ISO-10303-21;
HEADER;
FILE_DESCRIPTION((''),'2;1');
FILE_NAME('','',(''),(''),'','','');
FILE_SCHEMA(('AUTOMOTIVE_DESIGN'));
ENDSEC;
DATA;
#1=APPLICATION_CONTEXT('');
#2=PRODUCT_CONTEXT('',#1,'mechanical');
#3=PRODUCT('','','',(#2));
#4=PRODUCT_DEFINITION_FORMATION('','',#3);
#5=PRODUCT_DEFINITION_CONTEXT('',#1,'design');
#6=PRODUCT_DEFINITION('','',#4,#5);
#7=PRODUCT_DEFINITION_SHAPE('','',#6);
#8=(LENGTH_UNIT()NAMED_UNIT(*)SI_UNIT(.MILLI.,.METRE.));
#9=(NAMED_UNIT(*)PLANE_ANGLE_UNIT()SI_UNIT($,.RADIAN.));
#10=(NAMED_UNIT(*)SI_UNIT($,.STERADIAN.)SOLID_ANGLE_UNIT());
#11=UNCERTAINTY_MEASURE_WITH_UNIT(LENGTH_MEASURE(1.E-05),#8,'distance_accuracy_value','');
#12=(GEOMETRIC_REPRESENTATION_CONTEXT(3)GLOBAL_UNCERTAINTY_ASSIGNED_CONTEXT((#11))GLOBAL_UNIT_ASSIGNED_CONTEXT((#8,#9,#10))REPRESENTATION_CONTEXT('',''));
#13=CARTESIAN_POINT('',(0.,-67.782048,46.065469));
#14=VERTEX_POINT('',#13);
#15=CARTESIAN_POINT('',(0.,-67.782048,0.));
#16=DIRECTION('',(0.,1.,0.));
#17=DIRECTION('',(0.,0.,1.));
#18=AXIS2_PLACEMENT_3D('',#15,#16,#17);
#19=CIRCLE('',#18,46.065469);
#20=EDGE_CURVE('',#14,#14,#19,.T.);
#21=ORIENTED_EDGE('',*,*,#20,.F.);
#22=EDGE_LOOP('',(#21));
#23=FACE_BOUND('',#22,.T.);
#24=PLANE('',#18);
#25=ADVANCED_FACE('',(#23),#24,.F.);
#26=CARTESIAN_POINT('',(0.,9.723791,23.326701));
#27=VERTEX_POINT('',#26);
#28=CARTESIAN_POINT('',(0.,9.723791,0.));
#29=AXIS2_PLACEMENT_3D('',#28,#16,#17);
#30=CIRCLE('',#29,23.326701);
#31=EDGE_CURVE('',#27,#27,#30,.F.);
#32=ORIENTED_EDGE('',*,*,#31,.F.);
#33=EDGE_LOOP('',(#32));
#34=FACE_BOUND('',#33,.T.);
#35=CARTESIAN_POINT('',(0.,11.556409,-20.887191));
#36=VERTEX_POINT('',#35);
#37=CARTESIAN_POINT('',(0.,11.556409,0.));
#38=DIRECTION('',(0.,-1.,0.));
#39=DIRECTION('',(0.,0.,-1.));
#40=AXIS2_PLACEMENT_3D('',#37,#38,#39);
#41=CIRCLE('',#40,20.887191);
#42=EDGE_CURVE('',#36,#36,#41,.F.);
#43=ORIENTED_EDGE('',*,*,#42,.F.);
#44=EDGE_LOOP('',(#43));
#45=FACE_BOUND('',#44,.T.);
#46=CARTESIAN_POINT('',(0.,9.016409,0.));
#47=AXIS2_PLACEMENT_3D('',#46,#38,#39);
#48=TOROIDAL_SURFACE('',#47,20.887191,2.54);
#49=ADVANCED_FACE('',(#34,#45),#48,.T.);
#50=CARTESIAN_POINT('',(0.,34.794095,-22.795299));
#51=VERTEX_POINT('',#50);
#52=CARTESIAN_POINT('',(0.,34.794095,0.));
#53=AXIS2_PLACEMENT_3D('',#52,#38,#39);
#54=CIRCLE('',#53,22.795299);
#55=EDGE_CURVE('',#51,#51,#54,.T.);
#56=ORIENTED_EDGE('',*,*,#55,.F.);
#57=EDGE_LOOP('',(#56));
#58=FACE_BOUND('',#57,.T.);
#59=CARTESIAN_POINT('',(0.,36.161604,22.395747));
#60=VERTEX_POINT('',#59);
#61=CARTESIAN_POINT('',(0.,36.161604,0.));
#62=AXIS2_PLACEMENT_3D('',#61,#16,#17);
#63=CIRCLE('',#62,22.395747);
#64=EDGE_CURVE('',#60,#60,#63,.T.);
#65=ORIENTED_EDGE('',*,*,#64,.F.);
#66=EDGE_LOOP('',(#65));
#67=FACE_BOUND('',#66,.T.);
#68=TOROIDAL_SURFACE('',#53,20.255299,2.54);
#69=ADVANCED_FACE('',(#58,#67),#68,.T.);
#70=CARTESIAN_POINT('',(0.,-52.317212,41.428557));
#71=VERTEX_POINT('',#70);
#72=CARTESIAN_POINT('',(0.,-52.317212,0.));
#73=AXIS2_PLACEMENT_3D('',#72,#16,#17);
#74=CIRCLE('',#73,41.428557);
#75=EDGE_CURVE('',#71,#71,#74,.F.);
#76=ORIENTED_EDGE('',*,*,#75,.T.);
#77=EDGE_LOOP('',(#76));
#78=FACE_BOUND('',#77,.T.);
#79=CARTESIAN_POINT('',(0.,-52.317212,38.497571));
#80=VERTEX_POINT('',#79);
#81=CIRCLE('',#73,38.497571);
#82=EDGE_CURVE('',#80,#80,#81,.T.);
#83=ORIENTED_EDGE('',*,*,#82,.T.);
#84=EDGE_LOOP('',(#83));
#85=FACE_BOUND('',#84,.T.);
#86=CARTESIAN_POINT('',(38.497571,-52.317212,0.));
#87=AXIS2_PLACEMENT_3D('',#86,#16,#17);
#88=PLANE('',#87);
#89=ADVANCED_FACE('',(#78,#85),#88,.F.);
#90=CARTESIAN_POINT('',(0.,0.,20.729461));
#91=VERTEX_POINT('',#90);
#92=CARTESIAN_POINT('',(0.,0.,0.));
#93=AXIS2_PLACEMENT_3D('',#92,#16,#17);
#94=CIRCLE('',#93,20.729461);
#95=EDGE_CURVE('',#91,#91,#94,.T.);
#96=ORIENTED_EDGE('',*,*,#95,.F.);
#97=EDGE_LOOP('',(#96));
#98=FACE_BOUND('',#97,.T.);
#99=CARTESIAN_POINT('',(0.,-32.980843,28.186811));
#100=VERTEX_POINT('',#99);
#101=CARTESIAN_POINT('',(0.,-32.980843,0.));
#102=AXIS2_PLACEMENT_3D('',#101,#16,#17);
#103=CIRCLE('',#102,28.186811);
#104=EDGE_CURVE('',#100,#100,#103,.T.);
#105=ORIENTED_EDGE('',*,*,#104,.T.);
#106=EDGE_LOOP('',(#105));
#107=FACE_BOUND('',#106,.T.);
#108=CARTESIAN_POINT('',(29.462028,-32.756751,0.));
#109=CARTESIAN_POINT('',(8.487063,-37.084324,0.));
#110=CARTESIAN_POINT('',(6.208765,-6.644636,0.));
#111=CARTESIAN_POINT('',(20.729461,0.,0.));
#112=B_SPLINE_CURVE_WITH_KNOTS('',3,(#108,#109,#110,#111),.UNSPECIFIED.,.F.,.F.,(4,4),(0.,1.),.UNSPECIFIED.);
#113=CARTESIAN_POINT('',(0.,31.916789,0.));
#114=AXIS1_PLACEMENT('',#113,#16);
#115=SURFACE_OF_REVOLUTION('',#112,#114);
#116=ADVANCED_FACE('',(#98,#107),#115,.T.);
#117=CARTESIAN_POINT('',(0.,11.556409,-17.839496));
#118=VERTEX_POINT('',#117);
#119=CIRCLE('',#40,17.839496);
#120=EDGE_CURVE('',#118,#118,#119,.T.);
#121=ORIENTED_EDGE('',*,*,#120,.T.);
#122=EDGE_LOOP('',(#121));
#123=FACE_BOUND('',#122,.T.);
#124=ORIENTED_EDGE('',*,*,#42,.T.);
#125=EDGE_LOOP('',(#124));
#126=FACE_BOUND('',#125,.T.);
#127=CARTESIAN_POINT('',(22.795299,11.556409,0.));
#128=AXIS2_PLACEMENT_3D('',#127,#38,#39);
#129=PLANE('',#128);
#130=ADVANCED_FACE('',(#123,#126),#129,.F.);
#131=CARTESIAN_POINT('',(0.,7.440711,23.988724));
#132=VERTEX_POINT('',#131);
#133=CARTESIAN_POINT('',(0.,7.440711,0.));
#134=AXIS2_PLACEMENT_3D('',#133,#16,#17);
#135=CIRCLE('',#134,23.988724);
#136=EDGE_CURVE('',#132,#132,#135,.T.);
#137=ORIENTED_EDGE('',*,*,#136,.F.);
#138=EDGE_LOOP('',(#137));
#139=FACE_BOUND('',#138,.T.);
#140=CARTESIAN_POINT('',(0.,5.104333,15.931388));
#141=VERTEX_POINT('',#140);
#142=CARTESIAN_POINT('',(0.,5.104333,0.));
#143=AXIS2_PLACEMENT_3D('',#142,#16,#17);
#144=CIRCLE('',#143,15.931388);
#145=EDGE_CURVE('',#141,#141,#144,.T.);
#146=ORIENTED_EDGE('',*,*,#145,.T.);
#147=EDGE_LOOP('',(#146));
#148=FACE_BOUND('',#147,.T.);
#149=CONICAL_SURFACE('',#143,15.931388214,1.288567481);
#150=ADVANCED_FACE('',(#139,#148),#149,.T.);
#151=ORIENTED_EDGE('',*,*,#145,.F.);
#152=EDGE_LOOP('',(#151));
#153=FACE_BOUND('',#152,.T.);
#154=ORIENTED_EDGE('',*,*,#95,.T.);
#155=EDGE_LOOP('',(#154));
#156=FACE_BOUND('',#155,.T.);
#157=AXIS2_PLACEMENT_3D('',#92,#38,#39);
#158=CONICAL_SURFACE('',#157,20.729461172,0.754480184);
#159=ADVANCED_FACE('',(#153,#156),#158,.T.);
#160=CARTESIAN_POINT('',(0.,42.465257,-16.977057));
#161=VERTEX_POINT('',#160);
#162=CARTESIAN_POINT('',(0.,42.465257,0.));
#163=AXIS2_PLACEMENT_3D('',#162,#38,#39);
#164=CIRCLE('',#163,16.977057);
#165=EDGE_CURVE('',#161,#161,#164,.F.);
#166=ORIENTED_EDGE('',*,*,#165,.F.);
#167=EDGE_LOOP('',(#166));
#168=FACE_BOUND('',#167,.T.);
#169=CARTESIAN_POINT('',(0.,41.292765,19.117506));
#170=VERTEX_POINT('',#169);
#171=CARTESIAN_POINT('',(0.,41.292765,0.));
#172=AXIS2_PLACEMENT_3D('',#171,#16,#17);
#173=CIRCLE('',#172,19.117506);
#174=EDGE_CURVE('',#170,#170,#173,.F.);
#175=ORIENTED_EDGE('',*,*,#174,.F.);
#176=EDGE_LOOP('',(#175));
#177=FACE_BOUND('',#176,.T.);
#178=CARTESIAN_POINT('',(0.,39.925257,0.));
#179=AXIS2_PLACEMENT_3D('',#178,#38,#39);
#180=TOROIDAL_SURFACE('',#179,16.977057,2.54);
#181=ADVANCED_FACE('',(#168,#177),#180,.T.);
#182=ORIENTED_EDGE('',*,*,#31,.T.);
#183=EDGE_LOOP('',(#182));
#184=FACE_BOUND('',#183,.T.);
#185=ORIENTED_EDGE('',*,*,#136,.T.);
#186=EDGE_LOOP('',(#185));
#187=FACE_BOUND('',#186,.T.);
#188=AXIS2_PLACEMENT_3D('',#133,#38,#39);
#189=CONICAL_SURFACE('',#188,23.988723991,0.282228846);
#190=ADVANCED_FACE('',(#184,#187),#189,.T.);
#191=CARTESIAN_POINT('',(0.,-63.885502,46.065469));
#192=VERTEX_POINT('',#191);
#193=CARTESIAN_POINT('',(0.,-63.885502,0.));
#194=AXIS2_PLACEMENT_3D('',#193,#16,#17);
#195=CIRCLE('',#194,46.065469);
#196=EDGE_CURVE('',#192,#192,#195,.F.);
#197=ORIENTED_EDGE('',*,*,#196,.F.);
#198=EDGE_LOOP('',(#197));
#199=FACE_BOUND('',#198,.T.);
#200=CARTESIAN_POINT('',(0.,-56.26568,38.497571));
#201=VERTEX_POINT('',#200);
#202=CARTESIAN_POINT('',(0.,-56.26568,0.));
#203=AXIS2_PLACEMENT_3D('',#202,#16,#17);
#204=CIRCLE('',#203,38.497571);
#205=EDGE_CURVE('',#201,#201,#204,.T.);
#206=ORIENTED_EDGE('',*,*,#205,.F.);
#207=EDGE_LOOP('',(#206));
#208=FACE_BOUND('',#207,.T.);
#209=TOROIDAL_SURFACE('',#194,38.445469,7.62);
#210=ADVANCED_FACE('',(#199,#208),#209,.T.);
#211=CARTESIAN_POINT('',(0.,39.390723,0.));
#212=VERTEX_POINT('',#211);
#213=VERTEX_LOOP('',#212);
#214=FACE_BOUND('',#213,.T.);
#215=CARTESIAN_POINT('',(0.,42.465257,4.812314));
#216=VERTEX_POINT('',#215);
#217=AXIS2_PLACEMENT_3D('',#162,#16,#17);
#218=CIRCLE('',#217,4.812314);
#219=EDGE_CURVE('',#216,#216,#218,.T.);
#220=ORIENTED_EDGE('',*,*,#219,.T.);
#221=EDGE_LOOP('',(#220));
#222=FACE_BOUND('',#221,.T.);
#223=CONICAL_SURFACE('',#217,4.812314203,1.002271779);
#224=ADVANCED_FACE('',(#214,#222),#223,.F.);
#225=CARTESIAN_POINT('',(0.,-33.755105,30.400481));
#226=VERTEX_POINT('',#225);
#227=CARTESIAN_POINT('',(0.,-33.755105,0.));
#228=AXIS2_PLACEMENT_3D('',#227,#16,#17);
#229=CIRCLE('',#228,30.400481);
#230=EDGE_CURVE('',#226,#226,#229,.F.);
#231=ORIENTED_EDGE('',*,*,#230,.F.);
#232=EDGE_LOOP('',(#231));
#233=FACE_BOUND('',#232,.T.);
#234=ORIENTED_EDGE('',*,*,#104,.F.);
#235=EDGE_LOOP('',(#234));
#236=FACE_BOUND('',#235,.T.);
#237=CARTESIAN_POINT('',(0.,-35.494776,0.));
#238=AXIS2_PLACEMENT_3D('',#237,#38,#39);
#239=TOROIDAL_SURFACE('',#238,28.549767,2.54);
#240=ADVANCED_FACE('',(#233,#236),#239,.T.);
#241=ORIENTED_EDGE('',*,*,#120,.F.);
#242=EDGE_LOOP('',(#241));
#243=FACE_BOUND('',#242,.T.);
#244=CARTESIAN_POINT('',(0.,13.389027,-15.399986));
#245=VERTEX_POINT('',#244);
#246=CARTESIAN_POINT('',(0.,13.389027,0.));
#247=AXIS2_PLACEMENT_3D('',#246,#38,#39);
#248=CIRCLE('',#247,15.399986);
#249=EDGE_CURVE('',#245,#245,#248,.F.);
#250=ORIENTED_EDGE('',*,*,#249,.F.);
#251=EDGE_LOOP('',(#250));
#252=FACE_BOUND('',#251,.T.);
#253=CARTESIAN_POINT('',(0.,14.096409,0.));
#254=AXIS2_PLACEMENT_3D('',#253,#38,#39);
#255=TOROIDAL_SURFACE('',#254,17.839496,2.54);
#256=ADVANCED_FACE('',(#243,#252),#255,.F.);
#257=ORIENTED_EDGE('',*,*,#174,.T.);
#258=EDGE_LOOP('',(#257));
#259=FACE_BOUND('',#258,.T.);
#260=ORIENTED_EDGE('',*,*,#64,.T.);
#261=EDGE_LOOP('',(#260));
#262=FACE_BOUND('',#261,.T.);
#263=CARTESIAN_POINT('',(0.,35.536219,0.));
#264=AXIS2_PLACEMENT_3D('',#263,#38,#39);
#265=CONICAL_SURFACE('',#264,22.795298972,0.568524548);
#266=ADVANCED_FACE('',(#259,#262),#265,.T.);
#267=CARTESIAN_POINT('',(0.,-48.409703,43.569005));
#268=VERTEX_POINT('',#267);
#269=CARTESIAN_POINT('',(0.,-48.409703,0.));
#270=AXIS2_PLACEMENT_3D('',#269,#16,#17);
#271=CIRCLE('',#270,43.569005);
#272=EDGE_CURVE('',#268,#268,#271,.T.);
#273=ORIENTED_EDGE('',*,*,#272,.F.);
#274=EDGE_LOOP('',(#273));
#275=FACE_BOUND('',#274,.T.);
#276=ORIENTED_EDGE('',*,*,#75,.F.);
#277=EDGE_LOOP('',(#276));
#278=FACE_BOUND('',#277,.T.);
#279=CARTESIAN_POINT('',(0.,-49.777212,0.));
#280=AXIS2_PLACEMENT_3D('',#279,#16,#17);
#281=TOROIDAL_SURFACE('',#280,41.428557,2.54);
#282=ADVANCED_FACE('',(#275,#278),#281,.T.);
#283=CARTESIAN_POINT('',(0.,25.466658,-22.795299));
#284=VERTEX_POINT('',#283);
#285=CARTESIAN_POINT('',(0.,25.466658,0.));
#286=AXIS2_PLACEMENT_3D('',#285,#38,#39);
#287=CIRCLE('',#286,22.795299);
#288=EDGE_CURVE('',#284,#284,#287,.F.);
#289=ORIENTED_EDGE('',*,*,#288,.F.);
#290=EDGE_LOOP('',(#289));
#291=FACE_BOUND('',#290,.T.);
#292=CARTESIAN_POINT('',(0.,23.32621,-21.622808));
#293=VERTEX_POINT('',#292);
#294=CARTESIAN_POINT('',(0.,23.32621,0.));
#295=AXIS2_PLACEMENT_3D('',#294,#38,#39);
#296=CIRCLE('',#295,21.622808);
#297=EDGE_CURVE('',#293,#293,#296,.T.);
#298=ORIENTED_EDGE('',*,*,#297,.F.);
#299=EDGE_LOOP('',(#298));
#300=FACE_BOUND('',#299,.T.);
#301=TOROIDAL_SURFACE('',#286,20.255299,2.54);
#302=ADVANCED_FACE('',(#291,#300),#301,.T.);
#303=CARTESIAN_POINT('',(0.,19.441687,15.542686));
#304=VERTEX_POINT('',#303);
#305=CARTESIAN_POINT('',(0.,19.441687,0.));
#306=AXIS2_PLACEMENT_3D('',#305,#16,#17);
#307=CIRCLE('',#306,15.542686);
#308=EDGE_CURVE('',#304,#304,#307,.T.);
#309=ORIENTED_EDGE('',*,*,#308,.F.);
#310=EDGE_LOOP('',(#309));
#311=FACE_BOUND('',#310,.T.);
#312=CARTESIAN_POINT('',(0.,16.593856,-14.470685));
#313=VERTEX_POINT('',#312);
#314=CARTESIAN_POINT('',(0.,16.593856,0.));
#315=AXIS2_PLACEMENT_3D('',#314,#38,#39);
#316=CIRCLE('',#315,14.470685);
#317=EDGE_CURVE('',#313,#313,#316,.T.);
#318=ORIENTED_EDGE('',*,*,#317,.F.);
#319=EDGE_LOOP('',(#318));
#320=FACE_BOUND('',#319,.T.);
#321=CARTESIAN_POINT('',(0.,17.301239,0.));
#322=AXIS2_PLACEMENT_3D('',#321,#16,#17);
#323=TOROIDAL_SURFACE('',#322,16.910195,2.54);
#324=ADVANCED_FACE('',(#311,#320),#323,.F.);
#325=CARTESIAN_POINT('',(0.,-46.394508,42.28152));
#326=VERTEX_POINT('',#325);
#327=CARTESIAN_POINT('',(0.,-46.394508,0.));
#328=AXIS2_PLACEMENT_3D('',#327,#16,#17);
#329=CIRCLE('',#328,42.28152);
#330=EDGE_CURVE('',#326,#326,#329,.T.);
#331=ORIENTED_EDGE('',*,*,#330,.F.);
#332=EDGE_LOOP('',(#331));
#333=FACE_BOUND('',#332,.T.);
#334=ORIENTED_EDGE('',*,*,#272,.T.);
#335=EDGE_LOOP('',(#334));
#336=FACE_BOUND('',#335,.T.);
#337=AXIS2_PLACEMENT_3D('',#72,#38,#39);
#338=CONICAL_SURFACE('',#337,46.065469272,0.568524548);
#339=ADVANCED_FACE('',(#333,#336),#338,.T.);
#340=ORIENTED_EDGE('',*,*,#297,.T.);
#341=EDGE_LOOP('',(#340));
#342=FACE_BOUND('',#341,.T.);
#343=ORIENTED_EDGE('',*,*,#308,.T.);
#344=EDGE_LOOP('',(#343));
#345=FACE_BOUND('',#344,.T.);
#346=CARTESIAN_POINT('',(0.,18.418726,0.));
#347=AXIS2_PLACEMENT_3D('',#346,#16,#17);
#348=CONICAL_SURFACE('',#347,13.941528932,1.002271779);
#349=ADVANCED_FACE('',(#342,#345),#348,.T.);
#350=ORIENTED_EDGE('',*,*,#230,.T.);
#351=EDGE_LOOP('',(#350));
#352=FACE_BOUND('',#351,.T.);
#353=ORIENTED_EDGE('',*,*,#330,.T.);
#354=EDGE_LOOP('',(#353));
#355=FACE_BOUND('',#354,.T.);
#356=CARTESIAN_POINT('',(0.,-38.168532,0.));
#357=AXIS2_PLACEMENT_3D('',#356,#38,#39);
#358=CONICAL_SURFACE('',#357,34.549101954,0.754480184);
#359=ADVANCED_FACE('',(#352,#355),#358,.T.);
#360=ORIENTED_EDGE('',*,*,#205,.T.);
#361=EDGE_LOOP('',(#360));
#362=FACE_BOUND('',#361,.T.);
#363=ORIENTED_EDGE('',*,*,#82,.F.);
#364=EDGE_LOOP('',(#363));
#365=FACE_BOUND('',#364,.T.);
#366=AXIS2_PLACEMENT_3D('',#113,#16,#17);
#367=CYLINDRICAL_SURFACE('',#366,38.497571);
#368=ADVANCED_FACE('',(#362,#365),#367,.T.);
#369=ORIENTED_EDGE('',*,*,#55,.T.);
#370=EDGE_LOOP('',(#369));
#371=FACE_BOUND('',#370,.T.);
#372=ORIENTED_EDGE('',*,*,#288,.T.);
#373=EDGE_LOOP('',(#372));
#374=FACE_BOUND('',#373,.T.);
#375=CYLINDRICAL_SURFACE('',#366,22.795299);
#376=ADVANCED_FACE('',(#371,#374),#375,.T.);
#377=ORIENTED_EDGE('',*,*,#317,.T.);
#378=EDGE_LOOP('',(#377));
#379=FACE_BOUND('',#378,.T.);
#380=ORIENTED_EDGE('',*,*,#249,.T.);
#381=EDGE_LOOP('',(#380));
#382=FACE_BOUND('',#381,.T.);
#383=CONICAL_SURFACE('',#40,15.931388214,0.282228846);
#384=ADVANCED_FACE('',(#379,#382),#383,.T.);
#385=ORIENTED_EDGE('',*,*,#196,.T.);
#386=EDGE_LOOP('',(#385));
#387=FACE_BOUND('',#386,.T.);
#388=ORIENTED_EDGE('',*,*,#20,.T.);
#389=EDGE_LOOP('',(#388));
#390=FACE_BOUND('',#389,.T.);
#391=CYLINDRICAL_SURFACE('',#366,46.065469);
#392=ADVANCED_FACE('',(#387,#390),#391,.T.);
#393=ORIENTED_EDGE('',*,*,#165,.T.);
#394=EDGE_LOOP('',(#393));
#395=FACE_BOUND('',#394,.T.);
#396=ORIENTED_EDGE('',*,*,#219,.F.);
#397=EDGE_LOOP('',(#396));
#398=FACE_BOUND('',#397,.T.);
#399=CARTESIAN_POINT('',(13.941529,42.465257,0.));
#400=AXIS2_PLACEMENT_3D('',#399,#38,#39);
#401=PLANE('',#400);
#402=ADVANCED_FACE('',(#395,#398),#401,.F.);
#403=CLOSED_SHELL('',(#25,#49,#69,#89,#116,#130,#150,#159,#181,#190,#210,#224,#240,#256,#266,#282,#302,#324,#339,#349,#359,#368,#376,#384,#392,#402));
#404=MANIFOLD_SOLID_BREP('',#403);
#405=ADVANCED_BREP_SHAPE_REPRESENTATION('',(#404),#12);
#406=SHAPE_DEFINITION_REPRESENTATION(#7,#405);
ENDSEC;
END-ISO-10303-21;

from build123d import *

# Parameters (mm, degrees)
FILLET1_R = 2.54
FILLET2_R = 2.54
FILLET4_R = 7.62
FILLET7_R = 2.54


# Read off the part's stored shape, not the designer's step: Revolve1
with BuildPart() as part:
    # Revolve1 outline → Revolve1 (revolve)
    with BuildSketch(Plane.XY):
        with BuildLine():
            Line((18.368413952, 42.465256575), (4.812314203, 42.465256575))
            Line((4.812314203, 42.465256575), (0, 39.390722501))
            Line((0, 39.390722501), (0, -67.782047643))
            Line((0, -67.782047643), (46.065469272, -67.782047643))
            Line((46.065469272, -67.782047643), (46.065469272, -56.265680325))
            Line((46.065469272, -56.265680325), (38.497570749, -56.265680325))
            Line((38.497570749, -56.265680325), (38.497570749, -52.31721153))
            Line((38.497570749, -52.31721153), (46.065469272, -52.31721153))
            Line((46.065469272, -52.31721153), (42.28152001, -46.394508338))
            Line((42.28152001, -46.394508338), (29.462028024, -32.756750905))
            add(Edge.make_bspline(
                [(29.462028024, -32.756750905), (8.487063141, -37.084323744), (6.208764966, -6.644636087), (20.729461172, 0)],
                knots=[0, 0, 0, 0, 1, 1, 1, 1], degree=3))
            Line((20.729461172, 0), (15.931388214, 5.104332934))
            Line((15.931388214, 5.104332934), (23.988723991, 7.440710702))
            Line((23.988723991, 7.440710702), (22.795298972, 11.556409046))
            Line((22.795298972, 11.556409046), (15.931388214, 11.556409046))
            Line((15.931388214, 11.556409046), (13.941528932, 18.418725838))
            Line((13.941528932, 18.418725838), (22.795298972, 24.075301141))
            Line((22.795298972, 24.075301141), (22.795298972, 35.536219153))
            Line((22.795298972, 35.536219153), (18.368413952, 42.465256575))
        make_face()
    revolve(axis=Axis((0, 0, 0), (0, 1, 0)))

    # Fillet1
    fillet1_edges = [part.edges().sort_by_distance(p)[0] for p in [
        (-18.368413952, 42.465256575, 0),
        (-22.795298972, 35.536219153, 0),
        (-22.795298972, 24.075301141, 0),
        (-13.941528932, 18.418725838, 0),
        (-15.931388214, 11.556409046, 0),
        (-22.795298972, 11.556409046, 0),
    ]]
    fillet(fillet1_edges, radius=FILLET1_R)

    # Fillet2
    fillet2_edges = [part.edges().sort_by_distance(p)[0] for p in [
        (-29.462028024, -32.756750905, 0),
    ]]
    fillet(fillet2_edges, radius=FILLET2_R)

    # Fillet4
    # the kernel refuses this fillet: 7.62 mm, written as the material it takes off along each edge
    with BuildSketch(Plane(origin=(0, -56.265680325, 0), x_dir=(1, 0, 0), z_dir=(0, 0, 1))) as fillet4_piece_1_section:
        with BuildLine():
            CenterArc((46.065469272 - FILLET4_R, -FILLET4_R), FILLET4_R, 0, 90)
            Line((46.065469272, -FILLET4_R), (46.065469272, 0))
            Line((46.065469272, 0), (46.065469272 - FILLET4_R, 0))
        make_face()
    fillet4_piece_1 = revolve(axis=Axis((0, -56.265680325, 0), (0, 1, 0)), mode=Mode.PRIVATE)
    fillet4_piece_1 = fillet4_piece_1 - Plane(origin=(0, -58.402980628, 0), x_dir=(1, 0, 0), z_dir=(0, 1, 0)) * Cylinder(38.497570749, 185, mode=Mode.PRIVATE)
    add(fillet4_piece_1, mode=Mode.SUBTRACT)

    # Fillet7
    fillet7_edges = [part.edges().sort_by_distance(p)[0] for p in [
        (-46.065469272, -52.31721153, 0),
    ]]
    fillet(fillet7_edges, radius=FILLET7_R)


solid = part.part
